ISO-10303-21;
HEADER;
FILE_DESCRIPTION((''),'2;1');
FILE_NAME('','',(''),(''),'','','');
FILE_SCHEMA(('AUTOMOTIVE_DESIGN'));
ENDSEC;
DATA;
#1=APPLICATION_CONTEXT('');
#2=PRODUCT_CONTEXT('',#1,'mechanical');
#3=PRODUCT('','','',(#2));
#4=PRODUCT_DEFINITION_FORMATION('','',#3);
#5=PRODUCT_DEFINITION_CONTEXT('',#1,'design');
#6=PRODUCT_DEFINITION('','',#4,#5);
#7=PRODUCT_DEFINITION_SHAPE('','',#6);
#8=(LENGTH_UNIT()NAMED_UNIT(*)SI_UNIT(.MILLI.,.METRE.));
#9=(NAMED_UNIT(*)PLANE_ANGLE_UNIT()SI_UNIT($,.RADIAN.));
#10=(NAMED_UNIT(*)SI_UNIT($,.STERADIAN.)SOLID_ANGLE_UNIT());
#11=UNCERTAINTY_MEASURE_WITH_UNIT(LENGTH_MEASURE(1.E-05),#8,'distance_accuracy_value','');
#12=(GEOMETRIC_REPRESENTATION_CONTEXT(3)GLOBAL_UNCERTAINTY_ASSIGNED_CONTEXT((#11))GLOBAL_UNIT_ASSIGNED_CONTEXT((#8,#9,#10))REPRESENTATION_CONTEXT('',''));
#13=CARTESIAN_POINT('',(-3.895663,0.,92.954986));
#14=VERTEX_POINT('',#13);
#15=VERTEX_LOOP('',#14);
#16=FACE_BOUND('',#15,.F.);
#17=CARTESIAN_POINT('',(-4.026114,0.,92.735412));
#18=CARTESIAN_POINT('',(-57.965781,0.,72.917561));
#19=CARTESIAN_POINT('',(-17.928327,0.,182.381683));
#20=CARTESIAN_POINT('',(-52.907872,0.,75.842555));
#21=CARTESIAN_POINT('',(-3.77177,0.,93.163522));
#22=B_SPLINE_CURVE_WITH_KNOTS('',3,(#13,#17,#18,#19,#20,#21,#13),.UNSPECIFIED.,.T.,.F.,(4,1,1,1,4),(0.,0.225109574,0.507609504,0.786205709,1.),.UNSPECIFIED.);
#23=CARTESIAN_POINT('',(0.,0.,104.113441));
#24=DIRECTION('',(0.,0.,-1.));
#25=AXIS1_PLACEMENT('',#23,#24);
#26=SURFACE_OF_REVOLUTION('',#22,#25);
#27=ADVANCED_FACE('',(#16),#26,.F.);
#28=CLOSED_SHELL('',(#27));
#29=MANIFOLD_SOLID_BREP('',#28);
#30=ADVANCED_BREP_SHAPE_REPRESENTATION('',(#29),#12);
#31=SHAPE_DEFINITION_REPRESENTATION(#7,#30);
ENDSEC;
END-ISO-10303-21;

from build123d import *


# Not quite as in the source:
# - the program builds the solid bodies; features that only make, move or delete a surface that nothing else refers to are left out


with BuildPart() as f4:
    # F3 (on Front) → F4 (revolve)
    with BuildSketch(Plane.XZ):
        with BuildLine():
            add(Edge.make_bspline(
                [(-3.8956634235, 92.9549857974), (-4.0261143348, 92.7354124093), (-57.965781416, 72.9175607424), (-17.9283269619, 182.3816834796), (-52.907871745, 75.8425552097), (-3.7717697141, 93.1635221829), (-3.8956634235, 92.9549857974)],
                knots=[0, 0, 0, 0, 0.2251095736, 0.5076095041, 0.7862057091, 1, 1, 1, 1], degree=3))
        make_face()
    revolve(axis=Axis((0, 0, 104.1134409606), (0, 0, -1)))


solid = f4.part
